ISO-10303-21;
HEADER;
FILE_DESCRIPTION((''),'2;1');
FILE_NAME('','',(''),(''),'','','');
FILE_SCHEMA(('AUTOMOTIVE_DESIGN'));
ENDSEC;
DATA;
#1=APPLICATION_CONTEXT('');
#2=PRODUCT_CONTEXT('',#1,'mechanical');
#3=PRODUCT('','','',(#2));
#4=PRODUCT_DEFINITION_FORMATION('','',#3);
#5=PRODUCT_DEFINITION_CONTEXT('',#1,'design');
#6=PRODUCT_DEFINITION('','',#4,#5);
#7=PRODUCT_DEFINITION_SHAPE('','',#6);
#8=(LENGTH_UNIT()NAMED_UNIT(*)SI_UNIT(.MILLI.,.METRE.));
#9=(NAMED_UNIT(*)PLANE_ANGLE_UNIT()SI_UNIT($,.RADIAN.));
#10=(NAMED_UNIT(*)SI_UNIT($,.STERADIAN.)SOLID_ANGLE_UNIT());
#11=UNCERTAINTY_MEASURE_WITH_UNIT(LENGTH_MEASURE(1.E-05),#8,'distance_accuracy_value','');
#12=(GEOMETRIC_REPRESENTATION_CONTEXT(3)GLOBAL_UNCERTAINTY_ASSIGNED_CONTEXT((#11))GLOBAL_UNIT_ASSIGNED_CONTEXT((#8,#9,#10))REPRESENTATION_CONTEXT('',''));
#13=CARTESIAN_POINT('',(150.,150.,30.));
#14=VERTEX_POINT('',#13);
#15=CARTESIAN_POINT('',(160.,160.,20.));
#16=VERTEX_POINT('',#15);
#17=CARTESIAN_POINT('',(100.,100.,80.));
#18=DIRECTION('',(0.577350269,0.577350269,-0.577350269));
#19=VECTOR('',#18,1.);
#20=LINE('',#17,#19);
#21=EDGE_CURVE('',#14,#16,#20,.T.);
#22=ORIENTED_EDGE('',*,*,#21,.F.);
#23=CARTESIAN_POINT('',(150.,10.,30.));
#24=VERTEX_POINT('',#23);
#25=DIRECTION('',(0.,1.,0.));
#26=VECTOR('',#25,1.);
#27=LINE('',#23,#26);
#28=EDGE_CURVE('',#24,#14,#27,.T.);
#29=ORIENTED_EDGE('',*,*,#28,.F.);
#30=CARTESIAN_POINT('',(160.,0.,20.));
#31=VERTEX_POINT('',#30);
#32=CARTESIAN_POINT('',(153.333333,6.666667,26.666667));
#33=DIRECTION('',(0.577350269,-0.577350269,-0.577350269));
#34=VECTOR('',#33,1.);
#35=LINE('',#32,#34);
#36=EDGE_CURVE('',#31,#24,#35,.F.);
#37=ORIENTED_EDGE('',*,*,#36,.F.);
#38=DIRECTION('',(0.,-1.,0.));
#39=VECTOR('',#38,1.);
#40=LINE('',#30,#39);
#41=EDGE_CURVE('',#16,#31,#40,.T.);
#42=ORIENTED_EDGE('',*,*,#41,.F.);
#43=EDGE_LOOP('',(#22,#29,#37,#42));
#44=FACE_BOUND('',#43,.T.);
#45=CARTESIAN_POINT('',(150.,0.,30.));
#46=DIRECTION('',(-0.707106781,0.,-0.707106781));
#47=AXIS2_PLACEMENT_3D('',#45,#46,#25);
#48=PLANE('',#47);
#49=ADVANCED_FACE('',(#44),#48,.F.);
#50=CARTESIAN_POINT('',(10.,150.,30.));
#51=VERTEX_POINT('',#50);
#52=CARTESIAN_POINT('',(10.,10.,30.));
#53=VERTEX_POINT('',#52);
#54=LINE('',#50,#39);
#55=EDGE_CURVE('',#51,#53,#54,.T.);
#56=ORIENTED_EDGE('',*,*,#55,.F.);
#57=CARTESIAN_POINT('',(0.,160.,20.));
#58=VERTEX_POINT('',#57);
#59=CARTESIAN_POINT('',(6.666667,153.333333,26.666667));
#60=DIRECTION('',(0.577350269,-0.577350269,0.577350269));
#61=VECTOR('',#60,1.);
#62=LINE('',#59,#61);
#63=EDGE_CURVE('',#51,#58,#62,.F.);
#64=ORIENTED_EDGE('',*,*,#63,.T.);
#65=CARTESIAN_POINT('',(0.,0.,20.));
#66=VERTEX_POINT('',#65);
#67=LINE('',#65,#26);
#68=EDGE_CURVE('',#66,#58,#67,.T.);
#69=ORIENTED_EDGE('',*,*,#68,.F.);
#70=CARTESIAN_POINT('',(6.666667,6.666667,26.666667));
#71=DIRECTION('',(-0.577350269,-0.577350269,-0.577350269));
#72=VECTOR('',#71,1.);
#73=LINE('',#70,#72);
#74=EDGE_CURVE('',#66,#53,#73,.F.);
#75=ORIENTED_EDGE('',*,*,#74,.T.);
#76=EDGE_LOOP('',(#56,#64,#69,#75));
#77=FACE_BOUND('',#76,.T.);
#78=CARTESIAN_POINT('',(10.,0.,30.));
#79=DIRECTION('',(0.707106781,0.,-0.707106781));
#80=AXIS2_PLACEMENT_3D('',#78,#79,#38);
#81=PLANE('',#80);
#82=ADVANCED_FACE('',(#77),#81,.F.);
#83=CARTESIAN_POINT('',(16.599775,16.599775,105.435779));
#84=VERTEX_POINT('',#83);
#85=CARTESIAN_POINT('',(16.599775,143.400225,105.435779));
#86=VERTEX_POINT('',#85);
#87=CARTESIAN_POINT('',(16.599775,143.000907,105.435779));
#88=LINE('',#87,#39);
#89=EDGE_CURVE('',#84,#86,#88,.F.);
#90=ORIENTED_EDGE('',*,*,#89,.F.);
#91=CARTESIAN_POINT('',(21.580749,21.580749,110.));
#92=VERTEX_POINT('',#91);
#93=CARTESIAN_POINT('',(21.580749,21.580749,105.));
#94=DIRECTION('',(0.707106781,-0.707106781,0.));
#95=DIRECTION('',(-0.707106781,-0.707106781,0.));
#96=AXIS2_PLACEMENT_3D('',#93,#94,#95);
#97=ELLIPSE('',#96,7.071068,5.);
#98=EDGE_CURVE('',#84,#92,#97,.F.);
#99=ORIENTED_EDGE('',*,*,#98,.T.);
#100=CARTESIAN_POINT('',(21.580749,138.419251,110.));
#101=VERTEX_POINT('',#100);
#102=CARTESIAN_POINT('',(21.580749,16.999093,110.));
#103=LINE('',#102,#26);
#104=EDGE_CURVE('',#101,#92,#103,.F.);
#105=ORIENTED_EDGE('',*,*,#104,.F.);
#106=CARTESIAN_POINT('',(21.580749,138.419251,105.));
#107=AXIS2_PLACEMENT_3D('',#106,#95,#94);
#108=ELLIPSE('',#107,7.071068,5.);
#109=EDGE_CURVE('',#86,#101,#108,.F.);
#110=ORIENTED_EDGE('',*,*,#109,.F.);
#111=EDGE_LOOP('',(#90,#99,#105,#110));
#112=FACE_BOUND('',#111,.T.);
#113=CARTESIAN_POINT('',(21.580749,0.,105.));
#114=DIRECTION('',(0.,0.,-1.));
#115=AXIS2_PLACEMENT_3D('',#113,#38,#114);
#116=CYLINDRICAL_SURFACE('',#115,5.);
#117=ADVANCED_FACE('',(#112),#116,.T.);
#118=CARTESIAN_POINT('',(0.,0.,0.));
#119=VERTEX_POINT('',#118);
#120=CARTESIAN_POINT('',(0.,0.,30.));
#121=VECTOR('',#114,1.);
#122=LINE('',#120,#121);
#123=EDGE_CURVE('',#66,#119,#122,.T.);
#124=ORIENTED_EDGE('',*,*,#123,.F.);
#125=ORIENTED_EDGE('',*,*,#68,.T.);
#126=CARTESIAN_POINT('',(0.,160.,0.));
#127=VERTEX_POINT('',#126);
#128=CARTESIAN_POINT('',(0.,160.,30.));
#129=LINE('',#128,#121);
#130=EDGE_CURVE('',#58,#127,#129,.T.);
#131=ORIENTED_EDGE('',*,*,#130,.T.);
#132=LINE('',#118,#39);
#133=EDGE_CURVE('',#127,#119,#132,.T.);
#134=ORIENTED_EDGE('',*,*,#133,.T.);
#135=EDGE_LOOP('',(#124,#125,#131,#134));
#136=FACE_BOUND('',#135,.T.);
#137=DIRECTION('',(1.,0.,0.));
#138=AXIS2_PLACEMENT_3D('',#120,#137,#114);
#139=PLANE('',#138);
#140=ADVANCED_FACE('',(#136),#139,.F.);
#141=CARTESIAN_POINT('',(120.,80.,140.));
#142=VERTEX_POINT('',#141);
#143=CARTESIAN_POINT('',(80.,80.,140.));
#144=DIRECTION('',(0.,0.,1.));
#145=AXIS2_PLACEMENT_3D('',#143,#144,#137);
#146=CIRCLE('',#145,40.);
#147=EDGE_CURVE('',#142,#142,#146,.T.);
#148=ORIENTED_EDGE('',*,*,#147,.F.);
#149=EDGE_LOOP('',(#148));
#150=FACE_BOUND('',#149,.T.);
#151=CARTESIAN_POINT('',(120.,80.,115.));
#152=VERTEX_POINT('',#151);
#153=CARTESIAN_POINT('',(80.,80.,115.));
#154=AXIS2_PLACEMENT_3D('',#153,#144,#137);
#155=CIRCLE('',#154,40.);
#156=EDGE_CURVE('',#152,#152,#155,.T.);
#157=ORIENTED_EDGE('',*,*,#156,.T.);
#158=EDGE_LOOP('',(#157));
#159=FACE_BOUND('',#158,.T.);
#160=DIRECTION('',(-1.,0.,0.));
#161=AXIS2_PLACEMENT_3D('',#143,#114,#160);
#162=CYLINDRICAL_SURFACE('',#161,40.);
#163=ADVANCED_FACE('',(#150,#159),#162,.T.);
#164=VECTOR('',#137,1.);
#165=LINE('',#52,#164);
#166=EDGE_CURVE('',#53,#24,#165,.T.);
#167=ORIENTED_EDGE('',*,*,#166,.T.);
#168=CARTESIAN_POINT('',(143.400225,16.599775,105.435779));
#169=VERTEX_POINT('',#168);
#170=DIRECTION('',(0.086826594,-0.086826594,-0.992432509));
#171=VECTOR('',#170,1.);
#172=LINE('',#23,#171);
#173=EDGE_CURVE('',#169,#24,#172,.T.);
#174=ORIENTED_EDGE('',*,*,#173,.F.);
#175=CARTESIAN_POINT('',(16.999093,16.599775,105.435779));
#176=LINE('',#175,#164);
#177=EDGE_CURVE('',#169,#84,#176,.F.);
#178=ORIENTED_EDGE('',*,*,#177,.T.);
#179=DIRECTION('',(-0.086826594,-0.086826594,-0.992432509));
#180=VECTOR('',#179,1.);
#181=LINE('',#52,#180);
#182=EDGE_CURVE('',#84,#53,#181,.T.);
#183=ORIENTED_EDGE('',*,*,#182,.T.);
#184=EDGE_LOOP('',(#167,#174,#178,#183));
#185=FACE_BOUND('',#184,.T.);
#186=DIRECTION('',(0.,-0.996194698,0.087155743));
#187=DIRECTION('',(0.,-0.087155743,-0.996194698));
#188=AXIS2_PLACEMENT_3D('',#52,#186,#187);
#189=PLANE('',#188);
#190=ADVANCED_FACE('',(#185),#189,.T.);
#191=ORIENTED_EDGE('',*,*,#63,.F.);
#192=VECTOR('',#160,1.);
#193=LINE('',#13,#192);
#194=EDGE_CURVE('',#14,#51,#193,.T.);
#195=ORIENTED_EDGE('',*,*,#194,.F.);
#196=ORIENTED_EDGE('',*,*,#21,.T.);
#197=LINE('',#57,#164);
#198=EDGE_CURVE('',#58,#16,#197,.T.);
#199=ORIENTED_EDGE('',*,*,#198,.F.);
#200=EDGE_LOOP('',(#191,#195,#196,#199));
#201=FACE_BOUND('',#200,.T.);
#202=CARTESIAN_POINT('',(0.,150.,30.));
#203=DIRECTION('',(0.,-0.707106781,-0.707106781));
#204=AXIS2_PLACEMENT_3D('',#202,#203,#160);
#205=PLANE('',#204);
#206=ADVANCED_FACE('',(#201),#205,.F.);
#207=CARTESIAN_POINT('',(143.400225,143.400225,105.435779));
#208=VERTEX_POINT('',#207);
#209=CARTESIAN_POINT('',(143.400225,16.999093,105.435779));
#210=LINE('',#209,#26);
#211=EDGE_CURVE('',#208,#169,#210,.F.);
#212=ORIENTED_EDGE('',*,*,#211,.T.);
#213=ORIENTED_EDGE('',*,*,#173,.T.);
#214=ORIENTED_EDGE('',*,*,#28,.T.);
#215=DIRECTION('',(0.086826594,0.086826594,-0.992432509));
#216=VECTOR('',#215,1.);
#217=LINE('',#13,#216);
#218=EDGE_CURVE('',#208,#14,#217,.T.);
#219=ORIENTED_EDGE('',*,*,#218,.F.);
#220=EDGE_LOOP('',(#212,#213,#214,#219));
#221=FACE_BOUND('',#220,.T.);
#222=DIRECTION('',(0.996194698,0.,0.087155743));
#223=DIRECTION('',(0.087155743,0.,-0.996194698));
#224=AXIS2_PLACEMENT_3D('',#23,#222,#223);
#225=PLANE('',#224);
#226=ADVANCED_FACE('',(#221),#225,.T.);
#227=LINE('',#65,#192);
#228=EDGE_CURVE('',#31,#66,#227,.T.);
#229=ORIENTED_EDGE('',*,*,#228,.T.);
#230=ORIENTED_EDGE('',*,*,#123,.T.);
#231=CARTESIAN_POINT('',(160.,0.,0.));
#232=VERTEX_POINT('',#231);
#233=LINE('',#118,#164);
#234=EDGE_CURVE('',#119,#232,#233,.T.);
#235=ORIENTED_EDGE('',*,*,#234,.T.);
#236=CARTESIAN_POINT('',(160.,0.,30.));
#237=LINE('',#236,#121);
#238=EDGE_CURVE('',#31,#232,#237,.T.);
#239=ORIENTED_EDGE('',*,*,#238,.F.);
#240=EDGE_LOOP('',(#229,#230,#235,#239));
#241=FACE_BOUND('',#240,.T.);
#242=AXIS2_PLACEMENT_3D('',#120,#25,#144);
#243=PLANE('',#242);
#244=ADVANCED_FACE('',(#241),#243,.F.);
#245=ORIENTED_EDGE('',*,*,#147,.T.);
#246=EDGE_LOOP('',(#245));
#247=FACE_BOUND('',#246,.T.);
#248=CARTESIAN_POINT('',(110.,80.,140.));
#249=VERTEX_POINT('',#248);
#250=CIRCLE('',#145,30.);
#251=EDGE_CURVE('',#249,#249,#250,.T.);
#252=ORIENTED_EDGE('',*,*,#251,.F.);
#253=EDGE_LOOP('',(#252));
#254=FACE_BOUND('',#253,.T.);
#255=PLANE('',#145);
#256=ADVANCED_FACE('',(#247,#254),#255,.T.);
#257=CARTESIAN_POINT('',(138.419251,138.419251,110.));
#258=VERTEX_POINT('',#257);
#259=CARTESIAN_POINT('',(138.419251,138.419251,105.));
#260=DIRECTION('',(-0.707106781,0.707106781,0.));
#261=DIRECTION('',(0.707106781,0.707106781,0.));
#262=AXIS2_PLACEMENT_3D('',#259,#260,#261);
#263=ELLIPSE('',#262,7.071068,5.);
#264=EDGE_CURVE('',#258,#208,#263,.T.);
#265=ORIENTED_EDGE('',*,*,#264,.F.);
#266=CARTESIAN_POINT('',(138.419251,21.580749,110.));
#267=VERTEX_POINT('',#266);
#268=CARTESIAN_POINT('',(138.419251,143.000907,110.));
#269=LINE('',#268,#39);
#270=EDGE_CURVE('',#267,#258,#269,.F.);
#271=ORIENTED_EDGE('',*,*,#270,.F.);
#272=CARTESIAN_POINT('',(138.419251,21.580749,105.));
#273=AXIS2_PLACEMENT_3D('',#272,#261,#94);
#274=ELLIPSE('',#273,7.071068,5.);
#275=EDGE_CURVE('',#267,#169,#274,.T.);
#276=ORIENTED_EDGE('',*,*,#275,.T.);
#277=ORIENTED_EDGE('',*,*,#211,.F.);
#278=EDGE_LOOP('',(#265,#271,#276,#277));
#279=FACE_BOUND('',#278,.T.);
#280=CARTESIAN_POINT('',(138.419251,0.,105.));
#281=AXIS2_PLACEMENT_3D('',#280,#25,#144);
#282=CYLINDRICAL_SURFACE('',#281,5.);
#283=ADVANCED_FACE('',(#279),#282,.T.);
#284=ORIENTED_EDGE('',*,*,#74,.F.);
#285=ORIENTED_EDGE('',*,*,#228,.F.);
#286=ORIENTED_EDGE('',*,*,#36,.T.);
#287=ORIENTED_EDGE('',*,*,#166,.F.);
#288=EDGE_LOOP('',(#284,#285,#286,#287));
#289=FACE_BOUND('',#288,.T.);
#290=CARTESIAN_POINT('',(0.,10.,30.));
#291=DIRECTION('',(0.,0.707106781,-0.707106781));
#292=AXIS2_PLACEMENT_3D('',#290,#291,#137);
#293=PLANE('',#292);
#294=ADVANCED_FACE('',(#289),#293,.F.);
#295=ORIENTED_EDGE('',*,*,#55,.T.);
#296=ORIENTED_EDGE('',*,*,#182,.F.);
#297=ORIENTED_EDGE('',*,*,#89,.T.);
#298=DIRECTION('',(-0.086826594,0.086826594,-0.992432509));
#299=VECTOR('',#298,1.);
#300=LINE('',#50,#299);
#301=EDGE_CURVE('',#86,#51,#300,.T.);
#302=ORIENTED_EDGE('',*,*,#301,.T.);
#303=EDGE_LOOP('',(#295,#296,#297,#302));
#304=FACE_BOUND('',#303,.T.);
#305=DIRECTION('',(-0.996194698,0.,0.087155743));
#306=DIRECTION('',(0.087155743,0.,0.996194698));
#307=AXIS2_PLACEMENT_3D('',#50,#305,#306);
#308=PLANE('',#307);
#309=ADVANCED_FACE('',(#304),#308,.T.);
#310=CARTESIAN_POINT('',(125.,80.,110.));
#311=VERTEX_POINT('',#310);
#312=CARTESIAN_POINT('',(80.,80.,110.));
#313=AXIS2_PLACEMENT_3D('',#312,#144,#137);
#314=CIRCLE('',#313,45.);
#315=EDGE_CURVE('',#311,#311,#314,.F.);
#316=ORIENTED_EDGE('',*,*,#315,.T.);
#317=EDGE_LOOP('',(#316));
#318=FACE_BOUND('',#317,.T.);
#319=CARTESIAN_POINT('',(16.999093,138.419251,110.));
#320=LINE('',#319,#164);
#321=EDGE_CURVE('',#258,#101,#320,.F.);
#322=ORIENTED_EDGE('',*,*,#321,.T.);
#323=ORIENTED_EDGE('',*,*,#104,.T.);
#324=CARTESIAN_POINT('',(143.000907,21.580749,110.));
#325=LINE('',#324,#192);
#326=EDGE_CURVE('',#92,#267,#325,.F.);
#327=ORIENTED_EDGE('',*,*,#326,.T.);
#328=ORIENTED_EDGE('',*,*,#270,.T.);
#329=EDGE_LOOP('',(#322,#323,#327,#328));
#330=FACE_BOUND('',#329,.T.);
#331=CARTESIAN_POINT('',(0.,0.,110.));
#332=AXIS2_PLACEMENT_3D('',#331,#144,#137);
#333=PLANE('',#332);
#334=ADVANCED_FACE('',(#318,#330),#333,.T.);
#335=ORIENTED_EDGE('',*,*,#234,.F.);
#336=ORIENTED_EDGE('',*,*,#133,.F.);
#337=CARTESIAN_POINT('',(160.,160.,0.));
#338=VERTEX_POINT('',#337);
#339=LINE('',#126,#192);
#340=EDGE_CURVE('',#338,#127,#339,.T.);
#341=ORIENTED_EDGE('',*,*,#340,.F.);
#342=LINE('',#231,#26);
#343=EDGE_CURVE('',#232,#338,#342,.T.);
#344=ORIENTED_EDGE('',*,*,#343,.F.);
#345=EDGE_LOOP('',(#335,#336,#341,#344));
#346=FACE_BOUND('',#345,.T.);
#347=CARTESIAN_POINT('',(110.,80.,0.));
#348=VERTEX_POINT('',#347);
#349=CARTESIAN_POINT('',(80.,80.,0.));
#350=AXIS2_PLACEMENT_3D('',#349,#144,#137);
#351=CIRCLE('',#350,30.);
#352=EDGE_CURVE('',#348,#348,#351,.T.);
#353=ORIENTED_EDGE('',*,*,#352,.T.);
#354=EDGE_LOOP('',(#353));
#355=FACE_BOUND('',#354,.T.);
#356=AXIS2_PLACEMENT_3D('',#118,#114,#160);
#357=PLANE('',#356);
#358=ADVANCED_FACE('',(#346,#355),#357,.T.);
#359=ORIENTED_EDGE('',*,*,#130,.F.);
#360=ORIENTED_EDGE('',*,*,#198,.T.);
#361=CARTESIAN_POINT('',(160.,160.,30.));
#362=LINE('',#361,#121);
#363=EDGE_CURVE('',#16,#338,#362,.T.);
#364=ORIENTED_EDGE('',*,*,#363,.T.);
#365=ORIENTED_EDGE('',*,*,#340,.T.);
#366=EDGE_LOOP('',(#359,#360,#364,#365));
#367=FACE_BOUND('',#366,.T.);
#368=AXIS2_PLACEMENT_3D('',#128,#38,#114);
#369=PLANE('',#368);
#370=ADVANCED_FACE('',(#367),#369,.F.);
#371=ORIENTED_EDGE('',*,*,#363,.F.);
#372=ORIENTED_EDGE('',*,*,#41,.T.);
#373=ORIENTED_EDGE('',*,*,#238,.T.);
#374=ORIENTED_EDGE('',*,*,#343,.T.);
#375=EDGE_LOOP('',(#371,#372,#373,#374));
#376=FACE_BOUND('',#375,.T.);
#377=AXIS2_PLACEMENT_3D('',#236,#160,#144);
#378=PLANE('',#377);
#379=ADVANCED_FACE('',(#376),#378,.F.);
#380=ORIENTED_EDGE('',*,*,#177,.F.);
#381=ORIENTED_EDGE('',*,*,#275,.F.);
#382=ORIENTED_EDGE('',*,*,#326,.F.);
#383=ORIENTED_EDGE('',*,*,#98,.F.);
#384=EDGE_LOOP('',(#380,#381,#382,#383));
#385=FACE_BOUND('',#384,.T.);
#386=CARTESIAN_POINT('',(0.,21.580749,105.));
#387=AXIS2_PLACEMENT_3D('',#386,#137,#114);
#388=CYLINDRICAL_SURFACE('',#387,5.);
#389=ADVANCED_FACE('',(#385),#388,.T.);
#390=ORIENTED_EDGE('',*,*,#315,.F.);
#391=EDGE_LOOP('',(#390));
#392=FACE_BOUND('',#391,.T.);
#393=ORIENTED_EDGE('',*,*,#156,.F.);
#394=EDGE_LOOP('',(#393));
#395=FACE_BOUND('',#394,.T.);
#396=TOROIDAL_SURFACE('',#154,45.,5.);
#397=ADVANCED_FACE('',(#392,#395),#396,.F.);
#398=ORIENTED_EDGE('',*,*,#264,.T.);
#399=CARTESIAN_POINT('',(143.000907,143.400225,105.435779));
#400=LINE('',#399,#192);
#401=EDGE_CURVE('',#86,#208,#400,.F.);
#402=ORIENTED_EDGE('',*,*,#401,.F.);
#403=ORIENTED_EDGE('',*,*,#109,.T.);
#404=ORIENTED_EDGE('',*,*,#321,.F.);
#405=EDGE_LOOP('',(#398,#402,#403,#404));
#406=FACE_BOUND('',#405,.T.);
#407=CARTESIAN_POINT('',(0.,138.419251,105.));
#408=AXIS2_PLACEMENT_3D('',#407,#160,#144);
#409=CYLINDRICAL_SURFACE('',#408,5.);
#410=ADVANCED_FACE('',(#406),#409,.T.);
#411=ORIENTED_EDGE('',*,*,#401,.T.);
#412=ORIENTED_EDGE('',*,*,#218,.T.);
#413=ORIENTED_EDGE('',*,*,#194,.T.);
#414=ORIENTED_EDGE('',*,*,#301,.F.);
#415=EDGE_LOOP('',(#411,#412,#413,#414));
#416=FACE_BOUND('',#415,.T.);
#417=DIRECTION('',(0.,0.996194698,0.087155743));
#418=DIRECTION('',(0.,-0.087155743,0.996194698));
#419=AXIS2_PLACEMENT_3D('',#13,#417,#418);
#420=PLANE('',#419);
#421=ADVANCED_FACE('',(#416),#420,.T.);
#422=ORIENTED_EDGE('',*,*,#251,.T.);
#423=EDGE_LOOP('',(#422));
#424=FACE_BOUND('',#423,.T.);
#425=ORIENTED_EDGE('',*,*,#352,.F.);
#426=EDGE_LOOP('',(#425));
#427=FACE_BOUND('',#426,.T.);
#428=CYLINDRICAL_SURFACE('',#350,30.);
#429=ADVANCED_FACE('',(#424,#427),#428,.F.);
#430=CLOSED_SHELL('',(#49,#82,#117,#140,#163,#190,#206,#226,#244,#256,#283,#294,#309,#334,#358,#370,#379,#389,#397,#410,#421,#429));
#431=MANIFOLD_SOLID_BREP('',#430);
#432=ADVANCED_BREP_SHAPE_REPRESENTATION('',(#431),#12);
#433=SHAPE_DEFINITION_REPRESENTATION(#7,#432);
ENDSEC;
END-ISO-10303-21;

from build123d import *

# Parameters (mm, degrees)
SKETCH1_W               = 160
SKETCH1_H               = 160
BOSS_EXTRUDE1_DEPTH     = 30
SKETCH2_W               = 140
SKETCH2_H               = 140
BOSS_EXTRUDE2_DEPTH     = 80
BOSS_EXTRUDE2_TAPER     = 5
SKETCH3_R               = 40
BOSS_EXTRUDE3_DEPTH     = 30
CUT_EXTRUDE1_DEPTH      = 267.082693913
CUT_EXTRUDE1_DEPTH_BACK = 267.082693913
SKETCH4_R               = 30
FILLET1_R               = 5
CHAMFER1_SIZE           = 10


with BuildPart() as part:
    # Sketch1 → Boss-Extrude1 (new body)
    with BuildSketch(Plane.XY):
        with Locations((80, 80)):
            Rectangle(SKETCH1_W, SKETCH1_H)
    extrude(amount=BOSS_EXTRUDE1_DEPTH)

    # Sketch2 → Boss-Extrude2 (add)
    with BuildSketch(Plane.XY.offset(30)):
        with Locations((80, 80)):
            Rectangle(SKETCH2_W, SKETCH2_H)
    extrude(amount=BOSS_EXTRUDE2_DEPTH, taper=BOSS_EXTRUDE2_TAPER)

    # Sketch3 → Boss-Extrude3 (add)
    with BuildSketch(Plane.XY.offset(110)):
        with Locations((80, 80)):
            Circle(SKETCH3_R)
    extrude(amount=BOSS_EXTRUDE3_DEPTH)

    # Sketch4 → Cut-Extrude1 (cut, two sides: drawn at the far end of the back side and taken through both)
    with BuildSketch(Plane.XY.offset(140).offset(-CUT_EXTRUDE1_DEPTH_BACK)):
        with Locations((80, 80)):
            Circle(SKETCH4_R)
    extrude(amount=CUT_EXTRUDE1_DEPTH + CUT_EXTRUDE1_DEPTH_BACK, mode=Mode.SUBTRACT)

    # Fillet1
    fillet1_edges = [part.edges().sort_by_distance(p)[0] for p in [
        (16.999093082, 80, 110),
        (80, 16.999093082, 110),
        (143.000906918, 80, 110),
        (80, 143.000906918, 110),
        (40, 80, 110),
    ]]
    fillet(fillet1_edges, radius=FILLET1_R)

    # Chamfer1
    chamfer1_edges = [part.edges().sort_by_distance(p)[0] for p in [
        (160, 80, 30),
        (80, 160, 30),
        (0, 80, 30),
        (80, 0, 30),
    ]]
    chamfer(chamfer1_edges, length=CHAMFER1_SIZE - 0.0001)  # a hair under: the kernel refuses the full size


solid = part.part
